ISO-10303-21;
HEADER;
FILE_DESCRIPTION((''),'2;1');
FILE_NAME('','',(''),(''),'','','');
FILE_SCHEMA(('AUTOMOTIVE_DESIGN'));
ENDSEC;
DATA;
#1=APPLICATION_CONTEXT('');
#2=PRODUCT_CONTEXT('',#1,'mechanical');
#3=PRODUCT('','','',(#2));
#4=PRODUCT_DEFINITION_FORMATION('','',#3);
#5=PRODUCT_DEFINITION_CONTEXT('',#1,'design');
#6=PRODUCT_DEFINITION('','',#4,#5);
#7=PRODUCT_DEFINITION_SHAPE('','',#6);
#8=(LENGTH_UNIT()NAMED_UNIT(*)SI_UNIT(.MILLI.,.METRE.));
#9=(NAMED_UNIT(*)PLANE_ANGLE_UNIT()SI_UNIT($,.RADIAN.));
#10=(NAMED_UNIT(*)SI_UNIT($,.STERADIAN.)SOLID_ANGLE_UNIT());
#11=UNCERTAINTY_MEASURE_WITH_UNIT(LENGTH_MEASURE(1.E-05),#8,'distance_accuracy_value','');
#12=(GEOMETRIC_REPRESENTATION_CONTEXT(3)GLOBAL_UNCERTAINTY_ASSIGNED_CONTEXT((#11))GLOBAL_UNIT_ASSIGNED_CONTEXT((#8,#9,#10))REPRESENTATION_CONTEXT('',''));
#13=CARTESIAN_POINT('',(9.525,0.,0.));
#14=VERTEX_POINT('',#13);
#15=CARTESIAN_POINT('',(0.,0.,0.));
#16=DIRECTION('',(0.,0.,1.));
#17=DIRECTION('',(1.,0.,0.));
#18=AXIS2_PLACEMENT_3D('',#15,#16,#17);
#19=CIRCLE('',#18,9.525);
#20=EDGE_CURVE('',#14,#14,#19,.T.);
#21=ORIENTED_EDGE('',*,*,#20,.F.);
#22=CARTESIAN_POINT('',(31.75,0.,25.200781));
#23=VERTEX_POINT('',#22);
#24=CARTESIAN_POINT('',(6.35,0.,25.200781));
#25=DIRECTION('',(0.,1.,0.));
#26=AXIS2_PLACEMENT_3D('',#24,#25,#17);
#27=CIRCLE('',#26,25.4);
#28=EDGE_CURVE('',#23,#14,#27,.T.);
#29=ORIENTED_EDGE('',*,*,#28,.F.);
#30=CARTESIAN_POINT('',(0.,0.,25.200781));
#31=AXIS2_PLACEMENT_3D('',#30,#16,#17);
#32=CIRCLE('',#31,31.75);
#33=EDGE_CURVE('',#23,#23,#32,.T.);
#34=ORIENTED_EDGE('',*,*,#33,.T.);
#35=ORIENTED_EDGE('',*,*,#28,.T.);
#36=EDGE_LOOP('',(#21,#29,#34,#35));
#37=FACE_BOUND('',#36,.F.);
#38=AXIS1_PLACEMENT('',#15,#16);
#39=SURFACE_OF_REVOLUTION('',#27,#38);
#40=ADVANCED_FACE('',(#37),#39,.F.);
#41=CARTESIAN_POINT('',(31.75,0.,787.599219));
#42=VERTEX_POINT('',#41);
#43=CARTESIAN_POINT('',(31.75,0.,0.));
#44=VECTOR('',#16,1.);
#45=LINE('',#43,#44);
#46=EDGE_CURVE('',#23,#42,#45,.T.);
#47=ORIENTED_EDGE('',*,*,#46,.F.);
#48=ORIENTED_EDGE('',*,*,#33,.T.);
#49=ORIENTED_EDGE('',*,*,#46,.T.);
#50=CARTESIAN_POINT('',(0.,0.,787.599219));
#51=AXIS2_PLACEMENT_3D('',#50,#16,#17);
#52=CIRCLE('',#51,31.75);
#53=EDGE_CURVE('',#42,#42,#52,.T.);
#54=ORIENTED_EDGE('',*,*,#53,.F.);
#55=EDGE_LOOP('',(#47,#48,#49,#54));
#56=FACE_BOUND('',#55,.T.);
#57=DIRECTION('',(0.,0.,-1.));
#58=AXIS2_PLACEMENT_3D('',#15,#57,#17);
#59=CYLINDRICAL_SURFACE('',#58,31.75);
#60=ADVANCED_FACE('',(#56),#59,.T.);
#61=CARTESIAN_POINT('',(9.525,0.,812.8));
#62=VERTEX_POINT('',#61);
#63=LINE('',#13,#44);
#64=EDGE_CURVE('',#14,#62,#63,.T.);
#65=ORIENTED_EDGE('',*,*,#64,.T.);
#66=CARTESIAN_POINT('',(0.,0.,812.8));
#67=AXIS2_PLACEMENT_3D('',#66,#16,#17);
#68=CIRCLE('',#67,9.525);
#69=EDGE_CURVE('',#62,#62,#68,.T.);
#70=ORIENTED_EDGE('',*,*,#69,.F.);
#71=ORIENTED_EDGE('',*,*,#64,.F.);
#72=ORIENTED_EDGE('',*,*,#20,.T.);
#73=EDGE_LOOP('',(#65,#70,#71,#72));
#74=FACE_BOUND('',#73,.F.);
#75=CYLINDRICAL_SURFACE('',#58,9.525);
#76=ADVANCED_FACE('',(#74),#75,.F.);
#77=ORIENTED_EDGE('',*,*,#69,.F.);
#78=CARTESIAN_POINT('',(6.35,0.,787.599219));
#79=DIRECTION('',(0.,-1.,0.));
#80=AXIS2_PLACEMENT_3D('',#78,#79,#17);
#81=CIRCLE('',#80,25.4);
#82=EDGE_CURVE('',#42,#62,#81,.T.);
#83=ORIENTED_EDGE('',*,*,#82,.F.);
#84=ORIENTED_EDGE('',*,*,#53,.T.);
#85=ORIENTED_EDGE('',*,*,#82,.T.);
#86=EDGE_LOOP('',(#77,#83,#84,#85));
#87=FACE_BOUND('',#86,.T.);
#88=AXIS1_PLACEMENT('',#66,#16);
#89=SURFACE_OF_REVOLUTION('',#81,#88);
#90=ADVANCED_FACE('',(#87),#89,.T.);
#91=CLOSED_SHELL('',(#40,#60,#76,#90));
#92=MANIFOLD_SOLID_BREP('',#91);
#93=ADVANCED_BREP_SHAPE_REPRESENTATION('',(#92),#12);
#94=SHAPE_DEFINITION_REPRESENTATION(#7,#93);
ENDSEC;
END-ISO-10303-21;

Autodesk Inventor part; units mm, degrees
ref_plane "YZ Plane" through (0, 0, 0) normal (1, 0, 0) x (0, 1, 0)
ref_plane "XZ Plane" through (0, 0, 0) normal (0, 1, 0) x (-1, 0, 0)
ref_plane "XY Plane" through (0, 0, 0) normal (0, 0, 1) x (1, 0, 0)
sketch "Sketch1" plane through (0, 0, 0) normal (0, 0, 1) x (1, 0, 0)
  circle A0 centre (0, 0) radius 31.75
  circle A1 centre (0, 0) radius 9.525
  dimension "d0" = 63.5
  dimension "d1" = 19.05
extrude "Extrusion1" add sketch "Sketch1" along normal blind 812.8
fillet "Fillet1" radius 25.4 2 edges at (-31.75, 0, 812.8) (-31.75, 0, 0)
properties part number "Pool Noodle Part2 (26x28 robot)"
